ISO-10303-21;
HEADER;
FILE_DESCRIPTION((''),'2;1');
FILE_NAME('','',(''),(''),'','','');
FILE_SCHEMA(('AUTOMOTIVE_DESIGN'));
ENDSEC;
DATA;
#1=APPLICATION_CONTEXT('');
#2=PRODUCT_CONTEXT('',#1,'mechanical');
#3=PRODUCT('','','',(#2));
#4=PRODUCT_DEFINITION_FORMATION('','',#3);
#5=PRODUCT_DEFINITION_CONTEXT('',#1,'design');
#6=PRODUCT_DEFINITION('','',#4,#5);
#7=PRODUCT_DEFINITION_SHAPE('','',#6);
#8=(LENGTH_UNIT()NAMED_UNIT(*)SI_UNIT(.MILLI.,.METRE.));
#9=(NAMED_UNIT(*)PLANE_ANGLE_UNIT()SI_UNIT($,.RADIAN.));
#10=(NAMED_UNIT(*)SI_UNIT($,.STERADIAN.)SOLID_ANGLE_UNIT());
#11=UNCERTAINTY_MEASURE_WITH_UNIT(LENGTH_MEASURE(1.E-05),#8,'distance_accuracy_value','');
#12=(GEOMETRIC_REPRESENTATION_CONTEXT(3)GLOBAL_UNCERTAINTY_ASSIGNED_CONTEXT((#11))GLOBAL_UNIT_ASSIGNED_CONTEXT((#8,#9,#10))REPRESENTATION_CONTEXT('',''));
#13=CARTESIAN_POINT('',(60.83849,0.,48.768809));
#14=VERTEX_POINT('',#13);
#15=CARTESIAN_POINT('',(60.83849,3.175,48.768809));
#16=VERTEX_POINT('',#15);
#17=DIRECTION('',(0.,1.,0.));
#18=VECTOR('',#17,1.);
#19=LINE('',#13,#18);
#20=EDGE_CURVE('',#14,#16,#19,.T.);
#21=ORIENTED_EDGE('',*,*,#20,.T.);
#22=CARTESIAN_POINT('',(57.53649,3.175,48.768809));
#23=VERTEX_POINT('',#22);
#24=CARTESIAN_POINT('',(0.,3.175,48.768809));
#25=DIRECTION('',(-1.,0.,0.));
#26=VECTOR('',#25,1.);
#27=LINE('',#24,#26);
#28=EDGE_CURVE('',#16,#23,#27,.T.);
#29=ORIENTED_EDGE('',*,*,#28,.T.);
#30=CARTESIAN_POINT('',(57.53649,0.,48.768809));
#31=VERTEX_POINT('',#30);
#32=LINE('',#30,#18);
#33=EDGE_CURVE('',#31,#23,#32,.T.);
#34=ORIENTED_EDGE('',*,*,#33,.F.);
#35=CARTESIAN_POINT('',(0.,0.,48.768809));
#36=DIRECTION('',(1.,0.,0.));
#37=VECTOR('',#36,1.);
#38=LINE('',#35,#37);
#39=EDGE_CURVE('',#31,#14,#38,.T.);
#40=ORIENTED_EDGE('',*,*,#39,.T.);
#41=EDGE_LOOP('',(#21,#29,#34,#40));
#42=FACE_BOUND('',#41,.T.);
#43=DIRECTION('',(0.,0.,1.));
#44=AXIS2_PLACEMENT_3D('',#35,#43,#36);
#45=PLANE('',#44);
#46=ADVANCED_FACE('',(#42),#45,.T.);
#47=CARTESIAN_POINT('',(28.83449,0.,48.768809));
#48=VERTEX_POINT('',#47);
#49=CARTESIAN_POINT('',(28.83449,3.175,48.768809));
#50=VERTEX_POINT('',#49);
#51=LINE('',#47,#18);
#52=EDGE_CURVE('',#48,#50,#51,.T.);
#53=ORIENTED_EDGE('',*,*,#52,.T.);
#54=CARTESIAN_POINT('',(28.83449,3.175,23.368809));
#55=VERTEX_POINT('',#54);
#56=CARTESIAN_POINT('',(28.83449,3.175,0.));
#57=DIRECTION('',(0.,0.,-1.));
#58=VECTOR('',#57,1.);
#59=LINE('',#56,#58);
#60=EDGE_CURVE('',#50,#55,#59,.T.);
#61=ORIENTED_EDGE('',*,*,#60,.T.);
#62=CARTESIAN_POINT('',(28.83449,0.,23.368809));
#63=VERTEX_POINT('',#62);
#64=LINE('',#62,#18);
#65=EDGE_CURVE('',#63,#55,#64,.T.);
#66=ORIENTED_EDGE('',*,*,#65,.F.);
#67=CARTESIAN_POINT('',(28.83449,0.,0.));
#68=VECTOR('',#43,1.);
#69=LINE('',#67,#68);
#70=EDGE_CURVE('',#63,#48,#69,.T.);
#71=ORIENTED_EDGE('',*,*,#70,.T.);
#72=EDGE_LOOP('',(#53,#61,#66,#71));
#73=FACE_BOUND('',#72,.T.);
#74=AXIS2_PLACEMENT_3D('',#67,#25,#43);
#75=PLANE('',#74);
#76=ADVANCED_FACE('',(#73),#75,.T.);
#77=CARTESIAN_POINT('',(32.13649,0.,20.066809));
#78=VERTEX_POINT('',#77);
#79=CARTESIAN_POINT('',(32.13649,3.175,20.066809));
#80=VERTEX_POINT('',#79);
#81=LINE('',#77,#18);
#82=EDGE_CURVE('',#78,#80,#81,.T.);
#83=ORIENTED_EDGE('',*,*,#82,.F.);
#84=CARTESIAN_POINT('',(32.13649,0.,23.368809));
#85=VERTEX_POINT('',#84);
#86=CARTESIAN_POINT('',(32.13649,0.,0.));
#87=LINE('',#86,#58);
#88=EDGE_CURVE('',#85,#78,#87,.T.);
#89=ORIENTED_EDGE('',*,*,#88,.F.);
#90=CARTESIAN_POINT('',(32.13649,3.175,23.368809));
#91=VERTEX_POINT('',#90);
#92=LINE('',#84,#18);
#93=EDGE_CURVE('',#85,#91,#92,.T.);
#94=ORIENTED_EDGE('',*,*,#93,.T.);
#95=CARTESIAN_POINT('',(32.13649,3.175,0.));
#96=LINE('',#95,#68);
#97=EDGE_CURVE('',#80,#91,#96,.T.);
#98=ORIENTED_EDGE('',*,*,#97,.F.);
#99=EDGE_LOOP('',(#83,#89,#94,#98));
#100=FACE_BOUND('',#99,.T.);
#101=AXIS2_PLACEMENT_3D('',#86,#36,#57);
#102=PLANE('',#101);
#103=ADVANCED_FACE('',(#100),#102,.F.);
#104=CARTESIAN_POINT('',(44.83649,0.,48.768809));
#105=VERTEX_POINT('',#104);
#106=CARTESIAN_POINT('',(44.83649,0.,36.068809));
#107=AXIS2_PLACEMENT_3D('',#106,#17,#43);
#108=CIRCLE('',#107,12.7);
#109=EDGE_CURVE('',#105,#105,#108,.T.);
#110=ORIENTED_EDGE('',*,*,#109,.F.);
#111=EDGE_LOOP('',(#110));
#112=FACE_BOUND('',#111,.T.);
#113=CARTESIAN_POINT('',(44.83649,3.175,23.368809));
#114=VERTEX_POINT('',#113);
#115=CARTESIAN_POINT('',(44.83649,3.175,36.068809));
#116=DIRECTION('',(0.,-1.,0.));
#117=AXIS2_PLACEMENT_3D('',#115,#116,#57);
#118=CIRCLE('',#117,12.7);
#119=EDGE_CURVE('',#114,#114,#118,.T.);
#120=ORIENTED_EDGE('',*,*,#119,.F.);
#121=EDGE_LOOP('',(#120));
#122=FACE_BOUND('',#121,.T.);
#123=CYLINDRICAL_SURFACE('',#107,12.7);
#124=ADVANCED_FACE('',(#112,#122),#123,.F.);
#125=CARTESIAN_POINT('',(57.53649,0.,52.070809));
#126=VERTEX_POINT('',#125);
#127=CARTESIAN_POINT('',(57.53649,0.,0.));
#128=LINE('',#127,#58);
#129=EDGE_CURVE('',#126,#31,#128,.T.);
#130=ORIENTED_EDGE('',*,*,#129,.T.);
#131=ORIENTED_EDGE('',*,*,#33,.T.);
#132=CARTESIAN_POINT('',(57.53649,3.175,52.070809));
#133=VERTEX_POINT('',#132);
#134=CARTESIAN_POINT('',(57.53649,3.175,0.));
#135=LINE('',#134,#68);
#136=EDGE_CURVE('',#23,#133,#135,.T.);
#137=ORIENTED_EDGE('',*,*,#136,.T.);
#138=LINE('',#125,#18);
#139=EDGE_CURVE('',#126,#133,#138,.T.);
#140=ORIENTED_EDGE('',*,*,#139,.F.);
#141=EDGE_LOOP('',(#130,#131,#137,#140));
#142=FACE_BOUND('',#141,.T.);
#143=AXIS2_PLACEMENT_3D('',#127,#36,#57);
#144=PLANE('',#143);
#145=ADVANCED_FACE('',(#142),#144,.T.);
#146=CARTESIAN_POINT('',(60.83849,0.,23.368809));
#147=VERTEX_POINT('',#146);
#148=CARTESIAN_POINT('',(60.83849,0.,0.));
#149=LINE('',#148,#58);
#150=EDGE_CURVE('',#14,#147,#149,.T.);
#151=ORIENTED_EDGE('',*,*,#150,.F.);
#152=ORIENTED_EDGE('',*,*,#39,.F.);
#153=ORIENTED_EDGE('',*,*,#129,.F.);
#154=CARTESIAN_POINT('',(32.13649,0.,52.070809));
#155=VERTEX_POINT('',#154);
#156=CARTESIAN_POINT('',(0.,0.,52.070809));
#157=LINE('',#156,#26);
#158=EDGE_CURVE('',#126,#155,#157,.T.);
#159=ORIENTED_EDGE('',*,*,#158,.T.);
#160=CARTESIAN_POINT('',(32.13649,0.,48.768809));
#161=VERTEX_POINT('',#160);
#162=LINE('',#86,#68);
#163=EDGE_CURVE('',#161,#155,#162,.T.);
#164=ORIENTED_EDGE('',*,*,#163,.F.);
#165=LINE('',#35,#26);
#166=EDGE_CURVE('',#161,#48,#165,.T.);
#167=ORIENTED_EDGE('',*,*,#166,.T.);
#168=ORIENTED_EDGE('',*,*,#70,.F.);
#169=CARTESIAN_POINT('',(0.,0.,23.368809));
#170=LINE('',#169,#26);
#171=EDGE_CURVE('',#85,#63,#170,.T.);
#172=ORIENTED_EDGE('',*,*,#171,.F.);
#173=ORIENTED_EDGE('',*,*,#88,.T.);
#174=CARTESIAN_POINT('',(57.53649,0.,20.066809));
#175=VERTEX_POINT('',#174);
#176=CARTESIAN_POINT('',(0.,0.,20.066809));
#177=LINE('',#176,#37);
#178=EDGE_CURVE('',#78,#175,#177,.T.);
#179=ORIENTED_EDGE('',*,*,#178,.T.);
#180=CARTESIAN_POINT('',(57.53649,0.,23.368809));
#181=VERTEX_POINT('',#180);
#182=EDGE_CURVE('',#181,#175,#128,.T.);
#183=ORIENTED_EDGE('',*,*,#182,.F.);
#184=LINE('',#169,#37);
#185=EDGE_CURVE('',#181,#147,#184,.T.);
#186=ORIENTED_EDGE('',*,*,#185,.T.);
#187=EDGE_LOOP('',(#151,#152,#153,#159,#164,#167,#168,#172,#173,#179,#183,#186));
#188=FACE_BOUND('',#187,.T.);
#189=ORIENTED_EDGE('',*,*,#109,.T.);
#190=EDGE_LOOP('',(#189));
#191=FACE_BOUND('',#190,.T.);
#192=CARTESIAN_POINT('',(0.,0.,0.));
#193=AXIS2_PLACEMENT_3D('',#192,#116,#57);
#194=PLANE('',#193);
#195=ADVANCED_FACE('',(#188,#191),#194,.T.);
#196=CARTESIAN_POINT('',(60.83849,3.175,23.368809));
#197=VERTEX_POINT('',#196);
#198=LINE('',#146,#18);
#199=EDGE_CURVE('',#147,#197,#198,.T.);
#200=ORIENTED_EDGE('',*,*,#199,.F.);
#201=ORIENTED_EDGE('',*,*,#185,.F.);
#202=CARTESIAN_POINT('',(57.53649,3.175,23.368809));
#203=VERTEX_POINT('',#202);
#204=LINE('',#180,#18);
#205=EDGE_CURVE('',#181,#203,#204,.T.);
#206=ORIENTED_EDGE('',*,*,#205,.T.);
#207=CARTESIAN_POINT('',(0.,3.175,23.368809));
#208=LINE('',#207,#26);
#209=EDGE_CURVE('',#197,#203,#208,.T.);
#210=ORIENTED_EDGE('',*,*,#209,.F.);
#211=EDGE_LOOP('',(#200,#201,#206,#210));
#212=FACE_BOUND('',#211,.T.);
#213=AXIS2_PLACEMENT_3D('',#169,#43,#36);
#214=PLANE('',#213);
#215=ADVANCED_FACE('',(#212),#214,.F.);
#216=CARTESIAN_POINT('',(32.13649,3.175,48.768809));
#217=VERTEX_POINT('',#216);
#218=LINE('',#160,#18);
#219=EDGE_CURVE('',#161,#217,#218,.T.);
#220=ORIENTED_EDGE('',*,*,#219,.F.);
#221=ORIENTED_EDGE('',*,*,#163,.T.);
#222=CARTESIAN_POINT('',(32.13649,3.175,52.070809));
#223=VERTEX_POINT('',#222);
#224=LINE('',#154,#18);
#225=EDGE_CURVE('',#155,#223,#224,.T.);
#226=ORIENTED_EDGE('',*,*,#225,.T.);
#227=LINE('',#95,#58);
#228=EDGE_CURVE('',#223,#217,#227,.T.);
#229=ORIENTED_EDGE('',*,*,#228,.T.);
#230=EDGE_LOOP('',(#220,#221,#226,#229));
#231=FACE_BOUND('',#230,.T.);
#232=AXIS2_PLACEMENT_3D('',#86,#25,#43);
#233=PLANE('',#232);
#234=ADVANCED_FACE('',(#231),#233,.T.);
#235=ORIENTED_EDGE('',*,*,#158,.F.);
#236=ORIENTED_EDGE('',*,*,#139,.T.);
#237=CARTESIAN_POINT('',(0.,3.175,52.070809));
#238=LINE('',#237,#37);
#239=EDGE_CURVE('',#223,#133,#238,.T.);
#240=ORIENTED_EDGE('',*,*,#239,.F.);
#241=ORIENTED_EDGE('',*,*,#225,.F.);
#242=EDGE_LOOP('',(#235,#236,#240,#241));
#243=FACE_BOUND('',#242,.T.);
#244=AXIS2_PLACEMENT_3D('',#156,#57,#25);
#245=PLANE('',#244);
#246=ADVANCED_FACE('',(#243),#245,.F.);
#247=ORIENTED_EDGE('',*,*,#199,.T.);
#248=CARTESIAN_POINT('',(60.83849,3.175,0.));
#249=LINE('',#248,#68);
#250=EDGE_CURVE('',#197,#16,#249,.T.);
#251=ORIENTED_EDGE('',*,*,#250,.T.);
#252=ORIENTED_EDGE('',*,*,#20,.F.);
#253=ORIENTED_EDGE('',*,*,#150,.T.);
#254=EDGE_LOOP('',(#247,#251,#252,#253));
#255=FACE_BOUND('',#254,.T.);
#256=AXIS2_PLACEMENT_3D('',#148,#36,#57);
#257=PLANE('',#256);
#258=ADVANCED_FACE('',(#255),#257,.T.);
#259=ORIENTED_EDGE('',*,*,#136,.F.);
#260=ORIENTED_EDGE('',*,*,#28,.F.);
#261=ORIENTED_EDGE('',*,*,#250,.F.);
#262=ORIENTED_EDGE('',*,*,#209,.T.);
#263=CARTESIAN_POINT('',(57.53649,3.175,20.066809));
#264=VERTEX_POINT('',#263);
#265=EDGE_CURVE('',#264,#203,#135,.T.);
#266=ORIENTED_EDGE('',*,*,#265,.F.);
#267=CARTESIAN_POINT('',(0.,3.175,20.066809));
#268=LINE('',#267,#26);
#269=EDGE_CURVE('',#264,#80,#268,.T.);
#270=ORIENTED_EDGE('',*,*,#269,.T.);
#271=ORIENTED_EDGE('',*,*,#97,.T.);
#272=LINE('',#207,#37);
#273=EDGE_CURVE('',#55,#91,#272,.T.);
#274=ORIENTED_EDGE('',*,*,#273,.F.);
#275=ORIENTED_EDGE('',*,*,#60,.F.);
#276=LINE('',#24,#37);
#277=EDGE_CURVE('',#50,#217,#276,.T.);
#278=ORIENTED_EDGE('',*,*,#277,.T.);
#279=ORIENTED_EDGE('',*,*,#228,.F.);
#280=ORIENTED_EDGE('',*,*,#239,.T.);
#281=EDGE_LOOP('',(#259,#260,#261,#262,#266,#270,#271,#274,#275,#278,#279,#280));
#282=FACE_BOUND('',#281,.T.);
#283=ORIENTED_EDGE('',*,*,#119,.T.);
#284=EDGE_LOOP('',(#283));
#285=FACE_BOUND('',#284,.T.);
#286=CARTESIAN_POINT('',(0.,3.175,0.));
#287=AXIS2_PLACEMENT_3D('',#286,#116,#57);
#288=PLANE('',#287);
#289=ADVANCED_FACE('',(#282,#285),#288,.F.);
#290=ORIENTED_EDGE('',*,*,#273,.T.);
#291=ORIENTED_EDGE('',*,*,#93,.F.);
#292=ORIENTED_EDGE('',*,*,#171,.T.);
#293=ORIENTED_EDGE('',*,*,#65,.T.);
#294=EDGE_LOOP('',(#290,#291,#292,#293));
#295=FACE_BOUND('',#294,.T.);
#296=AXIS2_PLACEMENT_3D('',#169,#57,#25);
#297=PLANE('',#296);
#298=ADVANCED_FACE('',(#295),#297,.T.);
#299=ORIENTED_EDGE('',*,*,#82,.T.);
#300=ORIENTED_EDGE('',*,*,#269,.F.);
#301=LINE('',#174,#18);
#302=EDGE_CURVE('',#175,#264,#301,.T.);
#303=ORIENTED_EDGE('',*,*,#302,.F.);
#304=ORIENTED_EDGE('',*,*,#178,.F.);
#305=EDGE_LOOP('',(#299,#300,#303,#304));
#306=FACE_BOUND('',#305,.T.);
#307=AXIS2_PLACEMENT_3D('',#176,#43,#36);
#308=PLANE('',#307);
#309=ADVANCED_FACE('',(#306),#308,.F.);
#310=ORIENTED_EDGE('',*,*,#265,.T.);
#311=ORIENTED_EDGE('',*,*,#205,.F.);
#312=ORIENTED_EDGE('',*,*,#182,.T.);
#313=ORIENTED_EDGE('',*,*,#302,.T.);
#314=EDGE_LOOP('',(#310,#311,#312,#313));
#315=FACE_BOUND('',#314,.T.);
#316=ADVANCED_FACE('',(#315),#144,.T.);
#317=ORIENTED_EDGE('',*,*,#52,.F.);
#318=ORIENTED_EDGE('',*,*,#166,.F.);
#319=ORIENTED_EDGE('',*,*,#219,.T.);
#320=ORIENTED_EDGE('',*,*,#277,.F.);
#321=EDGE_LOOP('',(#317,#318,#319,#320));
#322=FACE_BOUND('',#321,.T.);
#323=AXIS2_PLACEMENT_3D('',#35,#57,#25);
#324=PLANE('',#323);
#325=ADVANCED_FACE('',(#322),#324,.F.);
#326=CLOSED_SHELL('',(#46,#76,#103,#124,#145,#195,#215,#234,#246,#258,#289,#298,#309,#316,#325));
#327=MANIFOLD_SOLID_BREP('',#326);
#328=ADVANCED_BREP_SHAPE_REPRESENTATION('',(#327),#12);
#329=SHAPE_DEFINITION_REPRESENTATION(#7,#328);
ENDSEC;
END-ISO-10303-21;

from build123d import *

# Parameters (mm, degrees)
SKETCH2_W                    = 304.8
SKETCH2_H                    = 304.8
BOSS_EXTRUDE1_DEPTH          = 3.175
CUT_EXTRUDE1_DEPTH           = 348.408852067
CUT_EXTRUDE1_DEPTH_BACK      = 348.408852067
SKETCH3_W                    = 304.8
SKETCH3_H                    = 304.8
SKETCH3_R                    = 12.7
SKETCH3_R_2                  = 8.89
BODY_DELETE_KEEP_1_OUTLINE_R = 8.89
BODY_DELETE_KEEP_1_DEPTH     = 3.175


# Read off the part's stored shape, not the designer's step: Body-Delete/Keep 1
with BuildPart() as part:
    # Sketch2 → Boss-Extrude1 (new body)
    with BuildSketch(Plane(origin=(0, 0, 0), x_dir=(1, 0, 0), z_dir=(0, 1, 0))):
        with Locations((-56.763509666, -124.968808797)):
            Rectangle(SKETCH2_W, SKETCH2_H)
    extrude(amount=BOSS_EXTRUDE1_DEPTH)

    # Sketch3 → Cut-Extrude1 (cut, two sides: drawn at the far end of the back side and taken through both)
    # profile 1 of 3: a face of its own
    with BuildSketch(Plane(origin=(0, 3.175, 0), x_dir=(1, 0, 0), z_dir=(0, 1, 0)).offset(-CUT_EXTRUDE1_DEPTH_BACK)):
        with Locations((-56.763509666, -124.968808797)):
            Rectangle(SKETCH3_W, SKETCH3_H)
        Polygon((-188.253637726, -268.695366412), (-192.063637726, -268.695366412), (-192.063637726, -265.393366412), (-198.413637726, -265.393366412), (-188.253637726, -205.195366412), align=None, mode=Mode.SUBTRACT)
        Polygon((-185.713637726, -265.393366412), (-175.553637726, -205.195366412), (-175.553637726, -268.695366412), (-179.363637726, -268.695366412), (-179.363637726, -265.393366412), align=None, mode=Mode.SUBTRACT)
        Polygon((-162.853637726, -268.695366412), (-166.663637726, -268.695366412), (-166.663637726, -265.393366412), (-173.013637726, -265.393366412), (-162.853637726, -205.195366412), align=None, mode=Mode.SUBTRACT)
        Polygon((-150.153637726, -268.695366412), (-153.963637726, -268.695366412), (-153.963637726, -265.393366412), (-160.313637726, -265.393366412), (-150.153637726, -205.195366412), align=None, mode=Mode.SUBTRACT)
        Polygon((-147.613637726, -265.393366412), (-137.453637726, -205.195366412), (-137.453637726, -268.695366412), (-141.263637726, -268.695366412), (-141.263637726, -265.393366412), align=None, mode=Mode.SUBTRACT)
        Polygon((-128.563637726, -265.393366412), (-134.913637726, -265.393366412), (-124.753637726, -205.195366412), (-124.753637726, -268.695366412), (-128.563637726, -268.695366412), align=None, mode=Mode.SUBTRACT)
        Polygon((-122.213637726, -265.393366412), (-112.053637726, -205.195366412), (-112.053637726, -268.695366412), (-115.863637726, -268.695366412), (-115.863637726, -265.393366412), align=None, mode=Mode.SUBTRACT)
        Polygon((-99.353637726, -268.695366412), (-103.163637726, -268.695366412), (-103.163637726, -265.393366412), (-109.513637726, -265.393366412), (-99.353637726, -205.195366412), align=None, mode=Mode.SUBTRACT)
        Polygon((-90.463637726, -268.695366412), (-90.463637726, -265.393366412), (-96.813637726, -265.393366412), (-86.653637726, -205.195366412), (-86.653637726, -268.695366412), align=None, mode=Mode.SUBTRACT)
        Polygon((-84.113637726, -265.393366412), (-73.953637726, -205.195366412), (-73.953637726, -268.695366412), (-77.763637726, -268.695366412), (-77.763637726, -265.393366412), align=None, mode=Mode.SUBTRACT)
        Polygon((-71.413637726, -265.393366412), (-61.253637726, -205.195366412), (-61.253637726, -268.695366412), (-65.063637726, -268.695366412), (-65.063637726, -265.393366412), align=None, mode=Mode.SUBTRACT)
        with BuildLine():
            ThreePointArc((-132.963509666, -135.600090559), (-133.446874634, -138.030130355), (-134.823381605, -140.09021862))
            Line((-134.823381605, -140.09021862), (-188.253637726, -193.520474741))
            ThreePointArc((-188.253637726, -193.520474741), (-190.313725991, -194.896981712), (-192.743765787, -195.38034668))
            Line((-192.743765787, -195.38034668), (-196.463509666, -195.38034668))
            Line((-196.463509666, -195.38034668), (-196.463509666, -131.88034668))
            Line((-196.463509666, -131.88034668), (-132.963509666, -131.88034668))
            Line((-132.963509666, -131.88034668), (-132.963509666, -135.600090559))
        make_face(mode=Mode.SUBTRACT)
        with BuildLine():
            Line((-126.613509666, -195.38034668), (-126.613509666, -131.88034668))
            Line((-126.613509666, -131.88034668), (-63.113509666, -131.88034668))
            Line((-63.113509666, -131.88034668), (-63.113509666, -135.600090559))
            ThreePointArc((-63.113509666, -135.600090559), (-63.596874634, -138.030130355), (-64.973381605, -140.09021862))
            Line((-64.973381605, -140.09021862), (-118.403637726, -193.520474741))
            ThreePointArc((-118.403637726, -193.520474741), (-120.463725991, -194.896981712), (-122.893765787, -195.38034668))
            Line((-122.893765787, -195.38034668), (-126.613509666, -195.38034668))
        make_face(mode=Mode.SUBTRACT)
        Polygon((-52.363637726, -268.695366412), (-52.363637726, -265.393366412), (-58.713637726, -265.393366412), (-48.553637726, -205.195366412), (-48.553637726, -268.695366412), align=None, mode=Mode.SUBTRACT)
        Polygon((-35.853637726, -205.195366412), (-35.853637726, -268.695366412), (-39.663637726, -268.695366412), (-39.663637726, -265.393366412), (-46.013637726, -265.393366412), align=None, mode=Mode.SUBTRACT)
        Polygon((-23.153637726, -205.195366412), (-23.153637726, -268.695366412), (-26.963637726, -268.695366412), (-26.963637726, -265.393366412), (-33.313637726, -265.393366412), align=None, mode=Mode.SUBTRACT)
        Polygon((-20.613637726, -265.393366412), (-10.453637726, -205.195366412), (-10.453637726, -268.695366412), (-14.263637726, -268.695366412), (-14.263637726, -265.393366412), align=None, mode=Mode.SUBTRACT)
        Polygon((-1.563637726, -268.695366412), (-1.563637726, -265.393366412), (-7.913637726, -265.393366412), (2.246362274, -205.195366412), (2.246362274, -268.695366412), align=None, mode=Mode.SUBTRACT)
        with BuildLine():
            Line((-53.043765787, -195.38034668), (-56.763509666, -195.38034668))
            Line((-56.763509666, -195.38034668), (-56.763509666, -131.88034668))
            Line((-56.763509666, -131.88034668), (6.736490334, -131.88034668))
            Line((6.736490334, -131.88034668), (6.736490334, -135.600090559))
            ThreePointArc((6.736490334, -135.600090559), (6.253125366, -138.030130355), (4.876618395, -140.09021862))
            Line((4.876618395, -140.09021862), (-48.553637726, -193.520474741))
            ThreePointArc((-48.553637726, -193.520474741), (-50.613725991, -194.896981712), (-53.043765787, -195.38034668))
        make_face(mode=Mode.SUBTRACT)
        with BuildLine():
            Line((13.086490334, -131.88034668), (76.586490334, -131.88034668))
            Line((76.586490334, -131.88034668), (76.586490334, -135.600090559))
            ThreePointArc((76.586490334, -135.600090559), (76.103125366, -138.030130355), (74.726618395, -140.09021862))
            Line((74.726618395, -140.09021862), (21.296362274, -193.520474741))
            ThreePointArc((21.296362274, -193.520474741), (19.236274009, -194.896981712), (16.806234213, -195.38034668))
            Line((16.806234213, -195.38034668), (13.086490334, -195.38034668))
            Line((13.086490334, -195.38034668), (13.086490334, -131.88034668))
        make_face(mode=Mode.SUBTRACT)
        with BuildLine():
            Line((-196.463509666, -125.53034668), (-196.463509666, -62.03034668))
            Line((-196.463509666, -62.03034668), (-132.963509666, -62.03034668))
            Line((-132.963509666, -62.03034668), (-132.963509666, -65.750090559))
            ThreePointArc((-132.963509666, -65.750090559), (-133.10773728, -67.095783354), (-133.533868437, -68.38034668))
            ThreePointArc((-133.533868437, -68.38034668), (-134.095097913, -69.368194866), (-134.823381605, -70.24021862))
            Line((-134.823381605, -70.24021862), (-188.253637726, -123.670474741))
            ThreePointArc((-188.253637726, -123.670474741), (-189.12566148, -124.398758433), (-190.113509666, -124.959987909))
            ThreePointArc((-190.113509666, -124.959987909), (-191.398072992, -125.386119066), (-192.743765787, -125.53034668))
            Line((-192.743765787, -125.53034668), (-196.463509666, -125.53034668))
        make_face(mode=Mode.SUBTRACT)
        with BuildLine():
            Line((-122.893765787, -125.53034668), (-126.613509666, -125.53034668))
            Line((-126.613509666, -125.53034668), (-126.613509666, -62.03034668))
            Line((-126.613509666, -62.03034668), (-63.113509666, -62.03034668))
            Line((-63.113509666, -62.03034668), (-63.113509666, -65.750090559))
            ThreePointArc((-63.113509666, -65.750090559), (-63.596874634, -68.180130355), (-64.973381605, -70.24021862))
            Line((-64.973381605, -70.24021862), (-118.403637726, -123.670474741))
            ThreePointArc((-118.403637726, -123.670474741), (-120.463725991, -125.046981712), (-122.893765787, -125.53034668))
        make_face(mode=Mode.SUBTRACT)
        Polygon((-196.463509666, -48.768808797), (-196.463509666, 14.731191203), (-192.653509666, 14.731191203), (-192.653509666, 11.429191203), (-186.303509666, 11.429191203), align=None, mode=Mode.SUBTRACT)
        Polygon((-183.763509666, 14.731191203), (-179.953509666, 14.731191203), (-179.953509666, 11.429191203), (-173.603509666, 11.429191203), (-183.763509666, -48.768808797), align=None, mode=Mode.SUBTRACT)
        Polygon((-171.063509666, 14.731191203), (-167.253509666, 14.731191203), (-167.253509666, 11.429191203), (-160.903509666, 11.429191203), (-171.063509666, -48.768808797), align=None, mode=Mode.SUBTRACT)
        Polygon((-158.363509666, 14.731191203), (-154.553509666, 14.731191203), (-154.553509666, 11.429191203), (-148.203509666, 11.429191203), (-158.363509666, -48.768808797), align=None, mode=Mode.SUBTRACT)
        Polygon((-145.663509666, 14.731191203), (-141.853509666, 14.731191203), (-141.853509666, 11.429191203), (-135.503509666, 11.429191203), (-145.663509666, -48.768808797), align=None, mode=Mode.SUBTRACT)
        Polygon((-132.963509666, 14.731191203), (-129.153509666, 14.731191203), (-129.153509666, 11.429191203), (-122.803509666, 11.429191203), (-132.963509666, -48.768808797), align=None, mode=Mode.SUBTRACT)
        Polygon((-120.263509666, 14.731191203), (-116.453509666, 14.731191203), (-116.453509666, 11.429191203), (-110.103509666, 11.429191203), (-120.263509666, -48.768808797), align=None, mode=Mode.SUBTRACT)
        Polygon((-107.563509666, 14.731191203), (-103.753509666, 14.731191203), (-103.753509666, 11.429191203), (-97.403509666, 11.429191203), (-107.563509666, -48.768808797), align=None, mode=Mode.SUBTRACT)
        Polygon((-94.863509666, 14.731191203), (-91.053509666, 14.731191203), (-91.053509666, 11.429191203), (-84.703509666, 11.429191203), (-94.863509666, -48.768808797), align=None, mode=Mode.SUBTRACT)
        Polygon((-82.163509666, 14.731191203), (-78.353509666, 14.731191203), (-78.353509666, 11.429191203), (-72.003509666, 11.429191203), (-82.163509666, -48.768808797), align=None, mode=Mode.SUBTRACT)
        Polygon((-69.463509666, 14.731191203), (-65.653509666, 14.731191203), (-65.653509666, 11.429191203), (-59.303509666, 11.429191203), (-69.463509666, -48.768808797), align=None, mode=Mode.SUBTRACT)
        with BuildLine():
            Line((-53.043765787, -125.53034668), (-56.763509666, -125.53034668))
            Line((-56.763509666, -125.53034668), (-56.763509666, -62.03034668))
            Line((-56.763509666, -62.03034668), (6.736490334, -62.03034668))
            Line((6.736490334, -62.03034668), (6.736490334, -65.750090559))
            ThreePointArc((6.736490334, -65.750090559), (6.253125366, -68.180130355), (4.876618395, -70.24021862))
            Line((4.876618395, -70.24021862), (-48.553637726, -123.670474741))
            ThreePointArc((-48.553637726, -123.670474741), (-50.613725991, -125.046981712), (-53.043765787, -125.53034668))
        make_face(mode=Mode.SUBTRACT)
        with BuildLine():
            Line((16.806234213, -125.53034668), (13.086490334, -125.53034668))
            Line((13.086490334, -125.53034668), (13.086490334, -62.03034668))
            Line((13.086490334, -62.03034668), (76.586490334, -62.03034668))
            Line((76.586490334, -62.03034668), (76.586490334, -65.750090559))
            ThreePointArc((76.586490334, -65.750090559), (76.103125366, -68.180130355), (74.726618395, -70.24021862))
            Line((74.726618395, -70.24021862), (21.296362274, -123.670474741))
            ThreePointArc((21.296362274, -123.670474741), (19.236274009, -125.046981712), (16.806234213, -125.53034668))
        make_face(mode=Mode.SUBTRACT)
        Polygon((-56.763509666, 14.731191203), (-52.953509666, 14.731191203), (-52.953509666, 11.429191203), (-46.603509666, 11.429191203), (-56.763509666, -48.768808797), align=None, mode=Mode.SUBTRACT)
        Polygon((-44.063509666, 14.731191203), (-40.253509666, 14.731191203), (-40.253509666, 11.429191203), (-33.903509666, 11.429191203), (-44.063509666, -48.768808797), align=None, mode=Mode.SUBTRACT)
        Polygon((-31.363509666, 14.731191203), (-27.553509666, 14.731191203), (-27.553509666, 11.429191203), (-21.203509666, 11.429191203), (-31.363509666, -48.768808797), align=None, mode=Mode.SUBTRACT)
        Polygon((-18.663509666, 14.731191203), (-14.853509666, 14.731191203), (-14.853509666, 11.429191203), (-8.503509666, 11.429191203), (-18.663509666, -48.768808797), align=None, mode=Mode.SUBTRACT)
        Polygon((-5.963509666, 14.731191203), (-2.153509666, 14.731191203), (-2.153509666, 11.429191203), (4.196490334, 11.429191203), (-5.963509666, -48.768808797), align=None, mode=Mode.SUBTRACT)
        Polygon((57.536490334, -48.768808797), (57.536490334, -52.070808797), (32.136490334, -52.070808797), (32.136490334, -48.768808797), (28.834490334, -48.768808797), (28.834490334, -23.368808797), (32.136490334, -23.368808797), (32.136490334, -20.066808797), (57.536490334, -20.066808797), (57.536490334, -23.368808797), (60.838490334, -23.368808797), (60.838490334, -48.768808797), align=None, mode=Mode.SUBTRACT)
        Polygon((28.834490334, 14.731191203), (32.136490334, 14.731191203), (32.136490334, 18.033191203), (57.536490334, 18.033191203), (57.536490334, 14.731191203), (60.838490334, 14.731191203), (60.838490334, -10.668808797), (57.536490334, -10.668808797), (57.536490334, -13.970808797), (32.136490334, -13.970808797), (32.136490334, -10.668808797), (28.834490334, -10.668808797), align=None, mode=Mode.SUBTRACT)
    # profile 2 of 3: a face of its own
    with BuildSketch(Plane(origin=(0, 3.175, 0), x_dir=(1, 0, 0), z_dir=(0, 1, 0)).offset(-CUT_EXTRUDE1_DEPTH_BACK)):
        with Locations(Location((44.836490334, -36.068808797, 0), (0, 0, 270))):
            Circle(SKETCH3_R)
    # profile 3 of 3: a face of its own
    with BuildSketch(Plane(origin=(0, 3.175, 0), x_dir=(1, 0, 0), z_dir=(0, 1, 0)).offset(-CUT_EXTRUDE1_DEPTH_BACK)):
        with Locations(Location((44.836490334, 2.031191203, 0), (0, 0, 270))):
            Circle(SKETCH3_R_2)
    extrude(amount=CUT_EXTRUDE1_DEPTH + CUT_EXTRUDE1_DEPTH_BACK, mode=Mode.SUBTRACT)

    # Body-Delete/Keep 1 outline → Body-Delete/Keep 1 (cut)
    # profile 1 of 41: a face of its own
    with BuildSketch(Plane(origin=(0, 0, 0), x_dir=(1, 0, 0), z_dir=(0, 1, 0))):
        Polygon((28.834490334, -10.668808797), (32.136490334, -10.668808797), (32.136490334, -13.970808797), (57.536490334, -13.970808797), (57.536490334, -10.668808797), (60.838490334, -10.668808797), (60.838490334, 14.731191203), (57.536490334, 14.731191203), (57.536490334, 18.033191203), (32.136490334, 18.033191203), (32.136490334, 14.731191203), (28.834490334, 14.731191203), align=None)
        with Locations((44.836490334, 2.031191203)):
            Circle(BODY_DELETE_KEEP_1_OUTLINE_R, mode=Mode.SUBTRACT)
    # profile 2 of 41: a face of its own
    with BuildSketch(Plane(origin=(0, 0, 0), x_dir=(1, 0, 0), z_dir=(0, 1, 0))):
        Polygon((-192.653509666, 11.429191203), (-192.653509666, 14.731191203), (-196.463509666, 14.731191203), (-196.463509666, -48.768808797), (-186.303509666, 11.429191203), align=None)
    # profile 3 of 41: a face of its own
    with BuildSketch(Plane(origin=(0, 0, 0), x_dir=(1, 0, 0), z_dir=(0, 1, 0))):
        Polygon((-2.153509666, 11.429191203), (-2.153509666, 14.731191203), (-5.963509666, 14.731191203), (-5.963509666, -48.768808797), (4.196490334, 11.429191203), align=None)
    # profile 4 of 41: a face of its own
    with BuildSketch(Plane(origin=(0, 0, 0), x_dir=(1, 0, 0), z_dir=(0, 1, 0))):
        Polygon((-27.553509666, 11.429191203), (-27.553509666, 14.731191203), (-31.363509666, 14.731191203), (-31.363509666, -48.768808797), (-21.203509666, 11.429191203), align=None)
    # profile 5 of 41: a face of its own
    with BuildSketch(Plane(origin=(0, 0, 0), x_dir=(1, 0, 0), z_dir=(0, 1, 0))):
        Polygon((-14.853509666, 11.429191203), (-14.853509666, 14.731191203), (-18.663509666, 14.731191203), (-18.663509666, -48.768808797), (-8.503509666, 11.429191203), align=None)
    # profile 6 of 41: a face of its own
    with BuildSketch(Plane(origin=(0, 0, 0), x_dir=(1, 0, 0), z_dir=(0, 1, 0))):
        Polygon((-65.653509666, 11.429191203), (-65.653509666, 14.731191203), (-69.463509666, 14.731191203), (-69.463509666, -48.768808797), (-59.303509666, 11.429191203), align=None)
    # profile 7 of 41: a face of its own
    with BuildSketch(Plane(origin=(0, 0, 0), x_dir=(1, 0, 0), z_dir=(0, 1, 0))):
        Polygon((-91.053509666, 11.429191203), (-91.053509666, 14.731191203), (-94.863509666, 14.731191203), (-94.863509666, -48.768808797), (-84.703509666, 11.429191203), align=None)
    # profile 8 of 41: a face of its own
    with BuildSketch(Plane(origin=(0, 0, 0), x_dir=(1, 0, 0), z_dir=(0, 1, 0))):
        Polygon((-40.253509666, 11.429191203), (-40.253509666, 14.731191203), (-44.063509666, 14.731191203), (-44.063509666, -48.768808797), (-33.903509666, 11.429191203), align=None)
    # profile 9 of 41: a face of its own
    with BuildSketch(Plane(origin=(0, 0, 0), x_dir=(1, 0, 0), z_dir=(0, 1, 0))):
        Polygon((-52.953509666, 11.429191203), (-52.953509666, 14.731191203), (-56.763509666, 14.731191203), (-56.763509666, -48.768808797), (-46.603509666, 11.429191203), align=None)
    # profile 10 of 41: a face of its own
    with BuildSketch(Plane(origin=(0, 0, 0), x_dir=(1, 0, 0), z_dir=(0, 1, 0))):
        Polygon((-141.853509666, 11.429191203), (-141.853509666, 14.731191203), (-145.663509666, 14.731191203), (-145.663509666, -48.768808797), (-135.503509666, 11.429191203), align=None)
    # profile 11 of 41: a face of its own
    with BuildSketch(Plane(origin=(0, 0, 0), x_dir=(1, 0, 0), z_dir=(0, 1, 0))):
        Polygon((-154.553509666, 11.429191203), (-154.553509666, 14.731191203), (-158.363509666, 14.731191203), (-158.363509666, -48.768808797), (-148.203509666, 11.429191203), align=None)
    # profile 12 of 41: a face of its own
    with BuildSketch(Plane(origin=(0, 0, 0), x_dir=(1, 0, 0), z_dir=(0, 1, 0))):
        Polygon((-167.253509666, 11.429191203), (-167.253509666, 14.731191203), (-171.063509666, 14.731191203), (-171.063509666, -48.768808797), (-160.903509666, 11.429191203), align=None)
    # profile 13 of 41: a face of its own
    with BuildSketch(Plane(origin=(0, 0, 0), x_dir=(1, 0, 0), z_dir=(0, 1, 0))):
        Polygon((-78.353509666, 11.429191203), (-78.353509666, 14.731191203), (-82.163509666, 14.731191203), (-82.163509666, -48.768808797), (-72.003509666, 11.429191203), align=None)
    # profile 14 of 41: a face of its own
    with BuildSketch(Plane(origin=(0, 0, 0), x_dir=(1, 0, 0), z_dir=(0, 1, 0))):
        Polygon((-179.953509666, 11.429191203), (-179.953509666, 14.731191203), (-183.763509666, 14.731191203), (-183.763509666, -48.768808797), (-173.603509666, 11.429191203), align=None)
    # profile 15 of 41: a face of its own
    with BuildSketch(Plane(origin=(0, 0, 0), x_dir=(1, 0, 0), z_dir=(0, 1, 0))):
        Polygon((-103.753509666, 11.429191203), (-103.753509666, 14.731191203), (-107.563509666, 14.731191203), (-107.563509666, -48.768808797), (-97.403509666, 11.429191203), align=None)
    # profile 16 of 41: a face of its own
    with BuildSketch(Plane(origin=(0, 0, 0), x_dir=(1, 0, 0), z_dir=(0, 1, 0))):
        Polygon((-116.453509666, 11.429191203), (-116.453509666, 14.731191203), (-120.263509666, 14.731191203), (-120.263509666, -48.768808797), (-110.103509666, 11.429191203), align=None)
    # profile 17 of 41: a face of its own
    with BuildSketch(Plane(origin=(0, 0, 0), x_dir=(1, 0, 0), z_dir=(0, 1, 0))):
        Polygon((-129.153509666, 11.429191203), (-129.153509666, 14.731191203), (-132.963509666, 14.731191203), (-132.963509666, -48.768808797), (-122.803509666, 11.429191203), align=None)
    # profile 18 of 41: a face of its own
    with BuildSketch(Plane(origin=(0, 0, 0), x_dir=(1, 0, 0), z_dir=(0, 1, 0))):
        Polygon((-71.413637726, -265.393366412), (-65.063637726, -265.393366412), (-65.063637726, -268.695366412), (-61.253637726, -268.695366412), (-61.253637726, -205.195366412), align=None)
    # profile 19 of 41: a face of its own
    with BuildSketch(Plane(origin=(0, 0, 0), x_dir=(1, 0, 0), z_dir=(0, 1, 0))):
        Polygon((-124.753637726, -205.195366412), (-134.913637726, -265.393366412), (-128.563637726, -265.393366412), (-128.563637726, -268.695366412), (-124.753637726, -268.695366412), align=None)
    # profile 20 of 41: a face of its own
    with BuildSketch(Plane(origin=(0, 0, 0), x_dir=(1, 0, 0), z_dir=(0, 1, 0))):
        Polygon((-23.153637726, -205.195366412), (-33.313637726, -265.393366412), (-26.963637726, -265.393366412), (-26.963637726, -268.695366412), (-23.153637726, -268.695366412), align=None)
    # profile 21 of 41: a face of its own
    with BuildSketch(Plane(origin=(0, 0, 0), x_dir=(1, 0, 0), z_dir=(0, 1, 0))):
        Polygon((-35.853637726, -205.195366412), (-46.013637726, -265.393366412), (-39.663637726, -265.393366412), (-39.663637726, -268.695366412), (-35.853637726, -268.695366412), align=None)
    # profile 22 of 41: a face of its own
    with BuildSketch(Plane(origin=(0, 0, 0), x_dir=(1, 0, 0), z_dir=(0, 1, 0))):
        Polygon((-73.953637726, -205.195366412), (-84.113637726, -265.393366412), (-77.763637726, -265.393366412), (-77.763637726, -268.695366412), (-73.953637726, -268.695366412), align=None)
    # profile 23 of 41: a face of its own
    with BuildSketch(Plane(origin=(0, 0, 0), x_dir=(1, 0, 0), z_dir=(0, 1, 0))):
        Polygon((-162.853637726, -205.195366412), (-173.013637726, -265.393366412), (-166.663637726, -265.393366412), (-166.663637726, -268.695366412), (-162.853637726, -268.695366412), align=None)
    # profile 24 of 41: a face of its own
    with BuildSketch(Plane(origin=(0, 0, 0), x_dir=(1, 0, 0), z_dir=(0, 1, 0))):
        Polygon((-188.253637726, -205.195366412), (-198.413637726, -265.393366412), (-192.063637726, -265.393366412), (-192.063637726, -268.695366412), (-188.253637726, -268.695366412), align=None)
    # profile 25 of 41: a face of its own
    with BuildSketch(Plane(origin=(0, 0, 0), x_dir=(1, 0, 0), z_dir=(0, 1, 0))):
        Polygon((-175.553637726, -205.195366412), (-185.713637726, -265.393366412), (-179.363637726, -265.393366412), (-179.363637726, -268.695366412), (-175.553637726, -268.695366412), align=None)
    # profile 26 of 41: a face of its own
    with BuildSketch(Plane(origin=(0, 0, 0), x_dir=(1, 0, 0), z_dir=(0, 1, 0))):
        Polygon((-150.153637726, -205.195366412), (-160.313637726, -265.393366412), (-153.963637726, -265.393366412), (-153.963637726, -268.695366412), (-150.153637726, -268.695366412), align=None)
    # profile 27 of 41: a face of its own
    with BuildSketch(Plane(origin=(0, 0, 0), x_dir=(1, 0, 0), z_dir=(0, 1, 0))):
        Polygon((-86.653637726, -205.195366412), (-96.813637726, -265.393366412), (-90.463637726, -265.393366412), (-90.463637726, -268.695366412), (-86.653637726, -268.695366412), align=None)
    # profile 28 of 41: a face of its own
    with BuildSketch(Plane(origin=(0, 0, 0), x_dir=(1, 0, 0), z_dir=(0, 1, 0))):
        Polygon((2.246362274, -205.195366412), (-7.913637726, -265.393366412), (-1.563637726, -265.393366412), (-1.563637726, -268.695366412), (2.246362274, -268.695366412), align=None)
    # profile 29 of 41: a face of its own
    with BuildSketch(Plane(origin=(0, 0, 0), x_dir=(1, 0, 0), z_dir=(0, 1, 0))):
        Polygon((-137.453637726, -205.195366412), (-147.613637726, -265.393366412), (-141.263637726, -265.393366412), (-141.263637726, -268.695366412), (-137.453637726, -268.695366412), align=None)
    # profile 30 of 41: a face of its own
    with BuildSketch(Plane(origin=(0, 0, 0), x_dir=(1, 0, 0), z_dir=(0, 1, 0))):
        Polygon((-48.553637726, -205.195366412), (-58.713637726, -265.393366412), (-52.363637726, -265.393366412), (-52.363637726, -268.695366412), (-48.553637726, -268.695366412), align=None)
    # profile 31 of 41: a face of its own
    with BuildSketch(Plane(origin=(0, 0, 0), x_dir=(1, 0, 0), z_dir=(0, 1, 0))):
        Polygon((-10.453637726, -205.195366412), (-20.613637726, -265.393366412), (-14.263637726, -265.393366412), (-14.263637726, -268.695366412), (-10.453637726, -268.695366412), align=None)
    # profile 32 of 41: a face of its own
    with BuildSketch(Plane(origin=(0, 0, 0), x_dir=(1, 0, 0), z_dir=(0, 1, 0))):
        Polygon((-99.353637726, -205.195366412), (-109.513637726, -265.393366412), (-103.163637726, -265.393366412), (-103.163637726, -268.695366412), (-99.353637726, -268.695366412), align=None)
    # profile 33 of 41: a face of its own
    with BuildSketch(Plane(origin=(0, 0, 0), x_dir=(1, 0, 0), z_dir=(0, 1, 0))):
        Polygon((-112.053637726, -205.195366412), (-122.213637726, -265.393366412), (-115.863637726, -265.393366412), (-115.863637726, -268.695366412), (-112.053637726, -268.695366412), align=None)
    # profile 34 of 41: a face of its own
    with BuildSketch(Plane(origin=(0, 0, 0), x_dir=(1, 0, 0), z_dir=(0, 1, 0))):
        with BuildLine():
            Line((-132.963509666, -62.03034668), (-196.463509666, -62.03034668))
            Line((-196.463509666, -62.03034668), (-196.463509666, -125.53034668))
            Line((-196.463509666, -125.53034668), (-192.743765787, -125.53034668))
            ThreePointArc((-192.743765787, -125.53034668), (-190.313725991, -125.046981712), (-188.253637726, -123.670474741))
            Line((-188.253637726, -123.670474741), (-134.823381605, -70.24021862))
            ThreePointArc((-134.823381605, -70.24021862), (-133.446874634, -68.180130355), (-132.963509666, -65.750090559))
            Line((-132.963509666, -65.750090559), (-132.963509666, -62.03034668))
        make_face()
    # profile 35 of 41: a face of its own
    with BuildSketch(Plane(origin=(0, 0, 0), x_dir=(1, 0, 0), z_dir=(0, 1, 0))):
        with BuildLine():
            Line((-132.963509666, -131.88034668), (-196.463509666, -131.88034668))
            Line((-196.463509666, -131.88034668), (-196.463509666, -195.38034668))
            Line((-196.463509666, -195.38034668), (-192.743765787, -195.38034668))
            ThreePointArc((-192.743765787, -195.38034668), (-190.313725991, -194.896981712), (-188.253637726, -193.520474741))
            Line((-188.253637726, -193.520474741), (-134.823381605, -140.09021862))
            ThreePointArc((-134.823381605, -140.09021862), (-133.446874634, -138.030130355), (-132.963509666, -135.600090559))
            Line((-132.963509666, -135.600090559), (-132.963509666, -131.88034668))
        make_face()
    # profile 36 of 41: a face of its own
    with BuildSketch(Plane(origin=(0, 0, 0), x_dir=(1, 0, 0), z_dir=(0, 1, 0))):
        with BuildLine():
            Line((6.736490334, -131.88034668), (-56.763509666, -131.88034668))
            Line((-56.763509666, -131.88034668), (-56.763509666, -195.38034668))
            Line((-56.763509666, -195.38034668), (-53.043765787, -195.38034668))
            ThreePointArc((-53.043765787, -195.38034668), (-50.613725991, -194.896981712), (-48.553637726, -193.520474741))
            Line((-48.553637726, -193.520474741), (4.876618395, -140.09021862))
            ThreePointArc((4.876618395, -140.09021862), (6.253125366, -138.030130355), (6.736490334, -135.600090559))
            Line((6.736490334, -135.600090559), (6.736490334, -131.88034668))
        make_face()
    # profile 37 of 41: a face of its own
    with BuildSketch(Plane(origin=(0, 0, 0), x_dir=(1, 0, 0), z_dir=(0, 1, 0))):
        with BuildLine():
            Line((6.736490334, -62.03034668), (-56.763509666, -62.03034668))
            Line((-56.763509666, -62.03034668), (-56.763509666, -125.53034668))
            Line((-56.763509666, -125.53034668), (-53.043765787, -125.53034668))
            ThreePointArc((-53.043765787, -125.53034668), (-50.613725991, -125.046981712), (-48.553637726, -123.670474741))
            Line((-48.553637726, -123.670474741), (4.876618395, -70.24021862))
            ThreePointArc((4.876618395, -70.24021862), (6.253125366, -68.180130355), (6.736490334, -65.750090559))
            Line((6.736490334, -65.750090559), (6.736490334, -62.03034668))
        make_face()
    # profile 38 of 41: a face of its own
    with BuildSketch(Plane(origin=(0, 0, 0), x_dir=(1, 0, 0), z_dir=(0, 1, 0))):
        with BuildLine():
            Line((21.296362274, -193.520474741), (74.726618395, -140.09021862))
            ThreePointArc((74.726618395, -140.09021862), (76.103125366, -138.030130355), (76.586490334, -135.600090559))
            Line((76.586490334, -135.600090559), (76.586490334, -131.88034668))
            Line((76.586490334, -131.88034668), (13.086490334, -131.88034668))
            Line((13.086490334, -131.88034668), (13.086490334, -195.38034668))
            Line((13.086490334, -195.38034668), (16.806234213, -195.38034668))
            ThreePointArc((16.806234213, -195.38034668), (19.236274009, -194.896981712), (21.296362274, -193.520474741))
        make_face()
    # profile 39 of 41: a face of its own
    with BuildSketch(Plane(origin=(0, 0, 0), x_dir=(1, 0, 0), z_dir=(0, 1, 0))):
        with BuildLine():
            Line((-126.613509666, -131.88034668), (-126.613509666, -195.38034668))
            Line((-126.613509666, -195.38034668), (-122.893765787, -195.38034668))
            ThreePointArc((-122.893765787, -195.38034668), (-120.463725991, -194.896981712), (-118.403637726, -193.520474741))
            Line((-118.403637726, -193.520474741), (-64.973381605, -140.09021862))
            ThreePointArc((-64.973381605, -140.09021862), (-63.596874634, -138.030130355), (-63.113509666, -135.600090559))
            Line((-63.113509666, -135.600090559), (-63.113509666, -131.88034668))
            Line((-63.113509666, -131.88034668), (-126.613509666, -131.88034668))
        make_face()
    # profile 40 of 41: a face of its own
    with BuildSketch(Plane(origin=(0, 0, 0), x_dir=(1, 0, 0), z_dir=(0, 1, 0))):
        with BuildLine():
            Line((76.586490334, -62.03034668), (13.086490334, -62.03034668))
            Line((13.086490334, -62.03034668), (13.086490334, -125.53034668))
            Line((13.086490334, -125.53034668), (16.806234213, -125.53034668))
            ThreePointArc((16.806234213, -125.53034668), (19.236274009, -125.046981712), (21.296362274, -123.670474741))
            Line((21.296362274, -123.670474741), (74.726618395, -70.24021862))
            ThreePointArc((74.726618395, -70.24021862), (76.103125366, -68.180130355), (76.586490334, -65.750090559))
            Line((76.586490334, -65.750090559), (76.586490334, -62.03034668))
        make_face()
    # profile 41 of 41: a face of its own
    with BuildSketch(Plane(origin=(0, 0, 0), x_dir=(1, 0, 0), z_dir=(0, 1, 0))):
        with BuildLine():
            Line((-126.613509666, -62.03034668), (-126.613509666, -125.53034668))
            Line((-126.613509666, -125.53034668), (-122.893765787, -125.53034668))
            ThreePointArc((-122.893765787, -125.53034668), (-120.463725991, -125.046981712), (-118.403637726, -123.670474741))
            Line((-118.403637726, -123.670474741), (-64.973381605, -70.24021862))
            ThreePointArc((-64.973381605, -70.24021862), (-63.596874634, -68.180130355), (-63.113509666, -65.750090559))
            Line((-63.113509666, -65.750090559), (-63.113509666, -62.03034668))
            Line((-63.113509666, -62.03034668), (-126.613509666, -62.03034668))
        make_face()
    extrude(amount=BODY_DELETE_KEEP_1_DEPTH, mode=Mode.SUBTRACT)


solid = part.part
